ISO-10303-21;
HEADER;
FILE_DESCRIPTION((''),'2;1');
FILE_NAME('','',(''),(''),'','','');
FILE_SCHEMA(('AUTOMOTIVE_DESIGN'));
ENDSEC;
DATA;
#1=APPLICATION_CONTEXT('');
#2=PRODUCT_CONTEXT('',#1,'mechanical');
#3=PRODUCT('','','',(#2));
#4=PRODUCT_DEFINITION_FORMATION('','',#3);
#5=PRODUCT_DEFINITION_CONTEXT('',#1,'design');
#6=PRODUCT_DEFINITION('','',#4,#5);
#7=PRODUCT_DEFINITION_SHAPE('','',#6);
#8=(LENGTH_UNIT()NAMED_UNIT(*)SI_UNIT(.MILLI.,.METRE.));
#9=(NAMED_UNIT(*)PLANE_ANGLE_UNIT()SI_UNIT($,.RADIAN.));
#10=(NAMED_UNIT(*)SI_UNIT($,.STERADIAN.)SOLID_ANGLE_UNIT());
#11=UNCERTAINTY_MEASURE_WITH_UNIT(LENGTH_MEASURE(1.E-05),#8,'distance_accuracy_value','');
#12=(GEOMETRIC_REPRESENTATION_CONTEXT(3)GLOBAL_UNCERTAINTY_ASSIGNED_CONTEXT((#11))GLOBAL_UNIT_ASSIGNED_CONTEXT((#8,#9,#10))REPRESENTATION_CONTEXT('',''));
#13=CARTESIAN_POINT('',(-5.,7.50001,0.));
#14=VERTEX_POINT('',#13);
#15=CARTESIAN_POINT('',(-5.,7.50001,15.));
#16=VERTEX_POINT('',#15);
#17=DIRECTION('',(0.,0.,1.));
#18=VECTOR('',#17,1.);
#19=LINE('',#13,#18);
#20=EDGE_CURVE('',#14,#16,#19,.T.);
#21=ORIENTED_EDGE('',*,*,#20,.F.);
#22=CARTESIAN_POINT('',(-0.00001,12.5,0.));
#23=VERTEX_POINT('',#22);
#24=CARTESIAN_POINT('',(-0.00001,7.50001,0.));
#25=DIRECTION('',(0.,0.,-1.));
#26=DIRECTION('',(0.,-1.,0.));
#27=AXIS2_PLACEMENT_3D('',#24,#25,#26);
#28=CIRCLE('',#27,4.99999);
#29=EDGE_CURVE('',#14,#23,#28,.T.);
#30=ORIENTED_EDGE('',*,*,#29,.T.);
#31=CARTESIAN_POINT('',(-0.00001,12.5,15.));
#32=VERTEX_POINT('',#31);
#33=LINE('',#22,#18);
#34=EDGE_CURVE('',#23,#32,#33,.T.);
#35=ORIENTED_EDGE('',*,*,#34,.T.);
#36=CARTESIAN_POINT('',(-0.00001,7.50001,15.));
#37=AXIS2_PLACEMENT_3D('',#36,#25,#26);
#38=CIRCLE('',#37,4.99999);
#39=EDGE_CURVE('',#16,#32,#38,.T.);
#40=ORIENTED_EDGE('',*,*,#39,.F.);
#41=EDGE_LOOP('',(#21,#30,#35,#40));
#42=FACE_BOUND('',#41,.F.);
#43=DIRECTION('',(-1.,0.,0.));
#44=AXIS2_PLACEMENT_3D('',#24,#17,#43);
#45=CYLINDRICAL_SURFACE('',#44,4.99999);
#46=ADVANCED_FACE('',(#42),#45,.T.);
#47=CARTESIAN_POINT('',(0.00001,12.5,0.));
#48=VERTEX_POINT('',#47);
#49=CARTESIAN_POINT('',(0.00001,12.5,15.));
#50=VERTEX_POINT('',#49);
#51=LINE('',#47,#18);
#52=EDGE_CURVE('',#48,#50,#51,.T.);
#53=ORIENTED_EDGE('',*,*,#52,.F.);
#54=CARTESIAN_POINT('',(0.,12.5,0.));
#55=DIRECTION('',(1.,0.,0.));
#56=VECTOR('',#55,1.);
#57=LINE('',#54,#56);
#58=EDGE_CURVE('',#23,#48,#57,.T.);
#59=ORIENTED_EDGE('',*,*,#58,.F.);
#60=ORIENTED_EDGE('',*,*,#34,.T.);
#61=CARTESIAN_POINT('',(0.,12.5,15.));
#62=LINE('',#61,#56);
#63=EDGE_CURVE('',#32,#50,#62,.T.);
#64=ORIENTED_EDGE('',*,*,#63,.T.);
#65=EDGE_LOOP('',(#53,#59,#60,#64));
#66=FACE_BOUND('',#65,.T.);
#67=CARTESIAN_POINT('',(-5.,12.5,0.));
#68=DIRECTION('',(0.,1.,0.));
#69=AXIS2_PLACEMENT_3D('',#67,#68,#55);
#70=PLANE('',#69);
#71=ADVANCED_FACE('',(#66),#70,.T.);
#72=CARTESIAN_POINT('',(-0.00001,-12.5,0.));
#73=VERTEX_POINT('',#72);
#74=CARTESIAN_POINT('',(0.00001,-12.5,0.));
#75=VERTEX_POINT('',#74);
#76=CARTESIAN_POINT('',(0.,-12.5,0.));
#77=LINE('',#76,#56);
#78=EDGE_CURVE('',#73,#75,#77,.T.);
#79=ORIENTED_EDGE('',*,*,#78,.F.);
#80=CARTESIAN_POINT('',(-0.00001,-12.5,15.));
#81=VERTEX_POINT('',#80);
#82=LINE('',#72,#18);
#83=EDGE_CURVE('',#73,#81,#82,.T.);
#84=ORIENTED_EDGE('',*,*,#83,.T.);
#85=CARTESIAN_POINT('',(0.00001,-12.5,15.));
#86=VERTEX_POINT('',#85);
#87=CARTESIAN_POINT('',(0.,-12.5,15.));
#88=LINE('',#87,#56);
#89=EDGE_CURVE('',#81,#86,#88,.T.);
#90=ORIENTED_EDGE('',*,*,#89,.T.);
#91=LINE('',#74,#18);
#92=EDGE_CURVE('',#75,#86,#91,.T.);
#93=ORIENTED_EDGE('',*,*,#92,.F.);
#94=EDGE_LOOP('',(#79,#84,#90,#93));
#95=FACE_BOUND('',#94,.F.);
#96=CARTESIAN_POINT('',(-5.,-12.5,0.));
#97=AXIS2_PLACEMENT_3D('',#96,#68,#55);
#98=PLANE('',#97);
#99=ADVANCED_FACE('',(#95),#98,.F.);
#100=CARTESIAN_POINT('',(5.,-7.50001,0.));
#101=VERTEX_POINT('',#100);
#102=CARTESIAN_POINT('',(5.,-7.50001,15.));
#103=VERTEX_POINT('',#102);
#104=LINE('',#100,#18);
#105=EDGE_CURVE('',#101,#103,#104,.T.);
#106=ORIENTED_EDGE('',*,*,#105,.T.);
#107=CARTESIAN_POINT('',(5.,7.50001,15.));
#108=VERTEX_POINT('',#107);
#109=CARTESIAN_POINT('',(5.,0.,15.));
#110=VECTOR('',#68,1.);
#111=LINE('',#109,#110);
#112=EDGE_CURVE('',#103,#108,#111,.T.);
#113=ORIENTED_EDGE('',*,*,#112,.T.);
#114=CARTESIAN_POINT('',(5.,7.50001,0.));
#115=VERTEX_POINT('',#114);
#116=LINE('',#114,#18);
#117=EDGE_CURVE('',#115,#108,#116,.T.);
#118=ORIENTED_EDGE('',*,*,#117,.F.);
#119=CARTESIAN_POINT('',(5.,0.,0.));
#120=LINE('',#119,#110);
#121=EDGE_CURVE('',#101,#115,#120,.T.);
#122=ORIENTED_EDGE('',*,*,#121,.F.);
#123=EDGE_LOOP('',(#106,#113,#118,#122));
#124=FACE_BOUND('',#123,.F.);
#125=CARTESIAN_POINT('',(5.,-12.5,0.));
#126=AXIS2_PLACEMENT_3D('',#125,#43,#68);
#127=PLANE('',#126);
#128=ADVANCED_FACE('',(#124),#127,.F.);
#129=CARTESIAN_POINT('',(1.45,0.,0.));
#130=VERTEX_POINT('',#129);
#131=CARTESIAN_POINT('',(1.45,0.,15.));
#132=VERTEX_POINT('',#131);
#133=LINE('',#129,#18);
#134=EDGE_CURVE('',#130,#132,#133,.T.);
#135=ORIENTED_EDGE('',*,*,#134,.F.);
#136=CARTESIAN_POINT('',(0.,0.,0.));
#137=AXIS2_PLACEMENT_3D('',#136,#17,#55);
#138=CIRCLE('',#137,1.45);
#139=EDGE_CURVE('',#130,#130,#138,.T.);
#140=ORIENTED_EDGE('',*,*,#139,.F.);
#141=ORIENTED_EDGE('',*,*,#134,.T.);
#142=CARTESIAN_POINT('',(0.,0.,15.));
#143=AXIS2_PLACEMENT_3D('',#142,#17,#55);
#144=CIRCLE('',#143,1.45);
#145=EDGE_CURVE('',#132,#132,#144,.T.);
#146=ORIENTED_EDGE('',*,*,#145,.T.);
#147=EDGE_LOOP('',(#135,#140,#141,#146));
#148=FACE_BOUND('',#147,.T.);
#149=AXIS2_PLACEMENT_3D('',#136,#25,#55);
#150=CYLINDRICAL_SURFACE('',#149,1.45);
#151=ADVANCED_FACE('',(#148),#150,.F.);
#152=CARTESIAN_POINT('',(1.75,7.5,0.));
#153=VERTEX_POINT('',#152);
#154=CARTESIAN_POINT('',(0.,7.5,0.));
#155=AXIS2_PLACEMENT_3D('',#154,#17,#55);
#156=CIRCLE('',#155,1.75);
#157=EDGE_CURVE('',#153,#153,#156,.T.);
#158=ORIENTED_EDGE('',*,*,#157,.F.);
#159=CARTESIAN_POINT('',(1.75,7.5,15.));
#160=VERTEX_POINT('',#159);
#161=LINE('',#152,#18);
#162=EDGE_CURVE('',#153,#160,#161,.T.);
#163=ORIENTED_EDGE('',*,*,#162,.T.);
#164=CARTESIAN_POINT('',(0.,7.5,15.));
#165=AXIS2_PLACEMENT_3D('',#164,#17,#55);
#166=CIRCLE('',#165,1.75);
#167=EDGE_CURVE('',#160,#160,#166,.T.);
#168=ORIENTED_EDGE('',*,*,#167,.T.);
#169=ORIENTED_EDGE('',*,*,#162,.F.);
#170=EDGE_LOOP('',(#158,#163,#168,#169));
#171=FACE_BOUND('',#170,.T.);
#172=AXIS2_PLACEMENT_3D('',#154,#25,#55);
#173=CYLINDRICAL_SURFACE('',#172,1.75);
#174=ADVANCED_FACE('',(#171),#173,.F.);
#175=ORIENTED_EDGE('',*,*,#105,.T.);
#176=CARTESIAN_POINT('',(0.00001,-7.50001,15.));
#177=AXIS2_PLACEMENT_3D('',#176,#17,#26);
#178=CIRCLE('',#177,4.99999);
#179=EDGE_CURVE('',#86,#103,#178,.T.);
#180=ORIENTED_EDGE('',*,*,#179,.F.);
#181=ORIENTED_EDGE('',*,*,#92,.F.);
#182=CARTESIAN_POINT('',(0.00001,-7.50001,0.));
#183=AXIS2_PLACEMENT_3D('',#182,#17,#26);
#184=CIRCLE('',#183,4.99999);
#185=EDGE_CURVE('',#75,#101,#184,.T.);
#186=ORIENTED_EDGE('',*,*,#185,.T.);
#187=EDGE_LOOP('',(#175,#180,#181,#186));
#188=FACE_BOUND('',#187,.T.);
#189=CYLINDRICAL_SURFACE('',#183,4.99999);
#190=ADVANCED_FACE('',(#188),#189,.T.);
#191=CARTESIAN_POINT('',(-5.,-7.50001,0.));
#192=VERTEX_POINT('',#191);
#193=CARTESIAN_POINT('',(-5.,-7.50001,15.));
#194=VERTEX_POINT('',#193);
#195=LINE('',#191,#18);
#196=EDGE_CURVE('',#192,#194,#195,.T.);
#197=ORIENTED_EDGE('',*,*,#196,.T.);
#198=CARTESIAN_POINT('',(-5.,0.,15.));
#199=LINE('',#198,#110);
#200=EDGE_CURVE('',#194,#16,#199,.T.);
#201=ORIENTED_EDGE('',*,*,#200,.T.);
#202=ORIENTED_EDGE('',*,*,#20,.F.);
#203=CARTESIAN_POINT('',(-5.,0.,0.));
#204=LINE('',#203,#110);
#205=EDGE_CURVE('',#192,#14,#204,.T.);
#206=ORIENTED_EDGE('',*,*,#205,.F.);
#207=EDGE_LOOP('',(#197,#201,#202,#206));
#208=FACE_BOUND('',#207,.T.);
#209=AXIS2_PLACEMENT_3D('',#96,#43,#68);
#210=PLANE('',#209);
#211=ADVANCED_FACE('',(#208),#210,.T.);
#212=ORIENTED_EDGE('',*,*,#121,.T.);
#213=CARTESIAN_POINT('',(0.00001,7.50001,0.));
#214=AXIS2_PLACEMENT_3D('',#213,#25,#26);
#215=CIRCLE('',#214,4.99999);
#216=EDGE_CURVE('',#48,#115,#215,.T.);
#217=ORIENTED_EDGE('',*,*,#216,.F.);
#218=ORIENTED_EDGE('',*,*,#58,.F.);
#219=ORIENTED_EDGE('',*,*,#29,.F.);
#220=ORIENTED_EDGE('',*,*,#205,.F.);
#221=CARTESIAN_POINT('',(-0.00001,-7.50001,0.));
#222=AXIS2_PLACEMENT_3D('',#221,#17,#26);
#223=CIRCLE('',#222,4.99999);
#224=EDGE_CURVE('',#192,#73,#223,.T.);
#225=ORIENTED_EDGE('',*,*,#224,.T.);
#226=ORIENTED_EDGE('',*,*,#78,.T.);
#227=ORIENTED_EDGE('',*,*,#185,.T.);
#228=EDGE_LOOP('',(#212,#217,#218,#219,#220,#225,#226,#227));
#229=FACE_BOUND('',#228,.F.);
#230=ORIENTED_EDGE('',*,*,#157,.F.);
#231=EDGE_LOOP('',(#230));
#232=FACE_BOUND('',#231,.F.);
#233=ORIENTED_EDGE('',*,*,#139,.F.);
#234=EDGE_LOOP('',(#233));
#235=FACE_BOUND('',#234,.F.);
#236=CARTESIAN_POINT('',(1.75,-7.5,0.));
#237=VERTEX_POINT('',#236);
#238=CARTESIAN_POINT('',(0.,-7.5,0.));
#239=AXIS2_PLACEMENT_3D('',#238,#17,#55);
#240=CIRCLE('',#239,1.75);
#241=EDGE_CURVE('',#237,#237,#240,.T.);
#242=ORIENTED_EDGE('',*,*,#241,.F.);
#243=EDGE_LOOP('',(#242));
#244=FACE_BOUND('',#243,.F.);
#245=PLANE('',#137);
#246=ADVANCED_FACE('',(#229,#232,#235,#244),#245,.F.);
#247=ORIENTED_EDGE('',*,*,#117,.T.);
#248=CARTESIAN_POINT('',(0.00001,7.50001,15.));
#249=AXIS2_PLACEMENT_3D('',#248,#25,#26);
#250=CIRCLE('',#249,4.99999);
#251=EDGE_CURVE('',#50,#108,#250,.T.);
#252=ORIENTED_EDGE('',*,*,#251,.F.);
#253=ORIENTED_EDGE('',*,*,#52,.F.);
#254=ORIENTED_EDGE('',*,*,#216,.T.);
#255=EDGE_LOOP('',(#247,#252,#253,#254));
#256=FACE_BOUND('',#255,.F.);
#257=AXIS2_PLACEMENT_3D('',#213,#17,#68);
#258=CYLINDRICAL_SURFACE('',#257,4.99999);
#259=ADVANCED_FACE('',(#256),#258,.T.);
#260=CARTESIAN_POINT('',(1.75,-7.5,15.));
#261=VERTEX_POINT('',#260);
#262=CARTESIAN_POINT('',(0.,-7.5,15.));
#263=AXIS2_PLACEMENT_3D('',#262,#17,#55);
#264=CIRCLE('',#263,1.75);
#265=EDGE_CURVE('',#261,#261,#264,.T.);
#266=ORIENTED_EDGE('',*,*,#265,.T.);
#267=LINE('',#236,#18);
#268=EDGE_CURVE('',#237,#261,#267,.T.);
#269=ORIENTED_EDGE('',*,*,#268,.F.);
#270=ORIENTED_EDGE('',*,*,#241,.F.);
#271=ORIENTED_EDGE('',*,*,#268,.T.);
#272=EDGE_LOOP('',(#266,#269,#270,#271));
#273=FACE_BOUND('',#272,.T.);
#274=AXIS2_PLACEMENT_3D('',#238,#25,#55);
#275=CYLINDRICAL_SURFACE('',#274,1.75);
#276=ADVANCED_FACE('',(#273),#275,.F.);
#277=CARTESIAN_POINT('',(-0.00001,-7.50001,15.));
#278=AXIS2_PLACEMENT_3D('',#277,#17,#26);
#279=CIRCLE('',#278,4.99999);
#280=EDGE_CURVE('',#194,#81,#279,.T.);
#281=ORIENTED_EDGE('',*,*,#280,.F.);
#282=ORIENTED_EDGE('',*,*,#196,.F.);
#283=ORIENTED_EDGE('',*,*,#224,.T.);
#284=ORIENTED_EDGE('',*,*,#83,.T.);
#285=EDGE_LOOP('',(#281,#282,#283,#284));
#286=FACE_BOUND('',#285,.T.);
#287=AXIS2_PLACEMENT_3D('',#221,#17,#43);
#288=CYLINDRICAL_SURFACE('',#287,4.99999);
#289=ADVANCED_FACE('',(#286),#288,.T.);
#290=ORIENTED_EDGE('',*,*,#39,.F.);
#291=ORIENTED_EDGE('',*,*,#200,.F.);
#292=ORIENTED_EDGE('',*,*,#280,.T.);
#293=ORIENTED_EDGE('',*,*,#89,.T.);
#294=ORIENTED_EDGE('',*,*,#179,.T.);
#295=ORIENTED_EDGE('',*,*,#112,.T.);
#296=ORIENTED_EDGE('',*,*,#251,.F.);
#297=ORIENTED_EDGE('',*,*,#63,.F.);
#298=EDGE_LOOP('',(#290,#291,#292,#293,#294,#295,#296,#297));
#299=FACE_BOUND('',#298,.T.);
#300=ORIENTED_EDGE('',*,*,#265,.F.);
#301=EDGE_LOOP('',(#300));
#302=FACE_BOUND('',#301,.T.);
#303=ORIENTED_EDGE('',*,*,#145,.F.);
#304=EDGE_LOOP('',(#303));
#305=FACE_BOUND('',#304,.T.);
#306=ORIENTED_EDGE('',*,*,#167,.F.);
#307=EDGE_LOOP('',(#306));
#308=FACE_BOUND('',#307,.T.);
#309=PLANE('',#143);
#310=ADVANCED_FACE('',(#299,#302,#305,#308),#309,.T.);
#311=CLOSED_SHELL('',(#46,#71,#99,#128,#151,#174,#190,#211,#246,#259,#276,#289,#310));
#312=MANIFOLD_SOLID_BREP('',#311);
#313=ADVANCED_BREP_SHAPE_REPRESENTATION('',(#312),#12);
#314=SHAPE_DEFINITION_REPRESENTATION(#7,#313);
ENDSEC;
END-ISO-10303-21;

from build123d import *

# Parameters (mm, degrees)
F0_W     = 10
F0_H     = 25
F0_R     = 1.75
F0_R_2   = 1.45
F1_DEPTH = 15
F2_R     = 4.99999


# Not quite as in the source:
# - a fillet or chamfer is up to 0.001 mm smaller than in the source, because OpenCascade refuses the exact size


with BuildPart() as f1:
    # F0 (on Top) → F1 (new body)
    with BuildSketch(Plane.XY):
        Rectangle(F0_W, F0_H)
        with Locations((0, -7.5)):
            Circle(F0_R, mode=Mode.SUBTRACT)
        Circle(F0_R_2, mode=Mode.SUBTRACT)
        with Locations((0, 7.5)):
            Circle(F0_R, mode=Mode.SUBTRACT)
    extrude(amount=F1_DEPTH)

    # F2 (radius 5 in the source; OpenCascade refuses exactly that, so slightly less here)
    f2_edges = [f1.edges().sort_by_distance(p)[0] for p in [
        (-5, -12.5, 7.5),
        (5, -12.5, 7.5),
        (-5, 12.5, 7.5),
        (5, 12.5, 7.5),
    ]]
    fillet(f2_edges, radius=F2_R)


solid = f1.part
